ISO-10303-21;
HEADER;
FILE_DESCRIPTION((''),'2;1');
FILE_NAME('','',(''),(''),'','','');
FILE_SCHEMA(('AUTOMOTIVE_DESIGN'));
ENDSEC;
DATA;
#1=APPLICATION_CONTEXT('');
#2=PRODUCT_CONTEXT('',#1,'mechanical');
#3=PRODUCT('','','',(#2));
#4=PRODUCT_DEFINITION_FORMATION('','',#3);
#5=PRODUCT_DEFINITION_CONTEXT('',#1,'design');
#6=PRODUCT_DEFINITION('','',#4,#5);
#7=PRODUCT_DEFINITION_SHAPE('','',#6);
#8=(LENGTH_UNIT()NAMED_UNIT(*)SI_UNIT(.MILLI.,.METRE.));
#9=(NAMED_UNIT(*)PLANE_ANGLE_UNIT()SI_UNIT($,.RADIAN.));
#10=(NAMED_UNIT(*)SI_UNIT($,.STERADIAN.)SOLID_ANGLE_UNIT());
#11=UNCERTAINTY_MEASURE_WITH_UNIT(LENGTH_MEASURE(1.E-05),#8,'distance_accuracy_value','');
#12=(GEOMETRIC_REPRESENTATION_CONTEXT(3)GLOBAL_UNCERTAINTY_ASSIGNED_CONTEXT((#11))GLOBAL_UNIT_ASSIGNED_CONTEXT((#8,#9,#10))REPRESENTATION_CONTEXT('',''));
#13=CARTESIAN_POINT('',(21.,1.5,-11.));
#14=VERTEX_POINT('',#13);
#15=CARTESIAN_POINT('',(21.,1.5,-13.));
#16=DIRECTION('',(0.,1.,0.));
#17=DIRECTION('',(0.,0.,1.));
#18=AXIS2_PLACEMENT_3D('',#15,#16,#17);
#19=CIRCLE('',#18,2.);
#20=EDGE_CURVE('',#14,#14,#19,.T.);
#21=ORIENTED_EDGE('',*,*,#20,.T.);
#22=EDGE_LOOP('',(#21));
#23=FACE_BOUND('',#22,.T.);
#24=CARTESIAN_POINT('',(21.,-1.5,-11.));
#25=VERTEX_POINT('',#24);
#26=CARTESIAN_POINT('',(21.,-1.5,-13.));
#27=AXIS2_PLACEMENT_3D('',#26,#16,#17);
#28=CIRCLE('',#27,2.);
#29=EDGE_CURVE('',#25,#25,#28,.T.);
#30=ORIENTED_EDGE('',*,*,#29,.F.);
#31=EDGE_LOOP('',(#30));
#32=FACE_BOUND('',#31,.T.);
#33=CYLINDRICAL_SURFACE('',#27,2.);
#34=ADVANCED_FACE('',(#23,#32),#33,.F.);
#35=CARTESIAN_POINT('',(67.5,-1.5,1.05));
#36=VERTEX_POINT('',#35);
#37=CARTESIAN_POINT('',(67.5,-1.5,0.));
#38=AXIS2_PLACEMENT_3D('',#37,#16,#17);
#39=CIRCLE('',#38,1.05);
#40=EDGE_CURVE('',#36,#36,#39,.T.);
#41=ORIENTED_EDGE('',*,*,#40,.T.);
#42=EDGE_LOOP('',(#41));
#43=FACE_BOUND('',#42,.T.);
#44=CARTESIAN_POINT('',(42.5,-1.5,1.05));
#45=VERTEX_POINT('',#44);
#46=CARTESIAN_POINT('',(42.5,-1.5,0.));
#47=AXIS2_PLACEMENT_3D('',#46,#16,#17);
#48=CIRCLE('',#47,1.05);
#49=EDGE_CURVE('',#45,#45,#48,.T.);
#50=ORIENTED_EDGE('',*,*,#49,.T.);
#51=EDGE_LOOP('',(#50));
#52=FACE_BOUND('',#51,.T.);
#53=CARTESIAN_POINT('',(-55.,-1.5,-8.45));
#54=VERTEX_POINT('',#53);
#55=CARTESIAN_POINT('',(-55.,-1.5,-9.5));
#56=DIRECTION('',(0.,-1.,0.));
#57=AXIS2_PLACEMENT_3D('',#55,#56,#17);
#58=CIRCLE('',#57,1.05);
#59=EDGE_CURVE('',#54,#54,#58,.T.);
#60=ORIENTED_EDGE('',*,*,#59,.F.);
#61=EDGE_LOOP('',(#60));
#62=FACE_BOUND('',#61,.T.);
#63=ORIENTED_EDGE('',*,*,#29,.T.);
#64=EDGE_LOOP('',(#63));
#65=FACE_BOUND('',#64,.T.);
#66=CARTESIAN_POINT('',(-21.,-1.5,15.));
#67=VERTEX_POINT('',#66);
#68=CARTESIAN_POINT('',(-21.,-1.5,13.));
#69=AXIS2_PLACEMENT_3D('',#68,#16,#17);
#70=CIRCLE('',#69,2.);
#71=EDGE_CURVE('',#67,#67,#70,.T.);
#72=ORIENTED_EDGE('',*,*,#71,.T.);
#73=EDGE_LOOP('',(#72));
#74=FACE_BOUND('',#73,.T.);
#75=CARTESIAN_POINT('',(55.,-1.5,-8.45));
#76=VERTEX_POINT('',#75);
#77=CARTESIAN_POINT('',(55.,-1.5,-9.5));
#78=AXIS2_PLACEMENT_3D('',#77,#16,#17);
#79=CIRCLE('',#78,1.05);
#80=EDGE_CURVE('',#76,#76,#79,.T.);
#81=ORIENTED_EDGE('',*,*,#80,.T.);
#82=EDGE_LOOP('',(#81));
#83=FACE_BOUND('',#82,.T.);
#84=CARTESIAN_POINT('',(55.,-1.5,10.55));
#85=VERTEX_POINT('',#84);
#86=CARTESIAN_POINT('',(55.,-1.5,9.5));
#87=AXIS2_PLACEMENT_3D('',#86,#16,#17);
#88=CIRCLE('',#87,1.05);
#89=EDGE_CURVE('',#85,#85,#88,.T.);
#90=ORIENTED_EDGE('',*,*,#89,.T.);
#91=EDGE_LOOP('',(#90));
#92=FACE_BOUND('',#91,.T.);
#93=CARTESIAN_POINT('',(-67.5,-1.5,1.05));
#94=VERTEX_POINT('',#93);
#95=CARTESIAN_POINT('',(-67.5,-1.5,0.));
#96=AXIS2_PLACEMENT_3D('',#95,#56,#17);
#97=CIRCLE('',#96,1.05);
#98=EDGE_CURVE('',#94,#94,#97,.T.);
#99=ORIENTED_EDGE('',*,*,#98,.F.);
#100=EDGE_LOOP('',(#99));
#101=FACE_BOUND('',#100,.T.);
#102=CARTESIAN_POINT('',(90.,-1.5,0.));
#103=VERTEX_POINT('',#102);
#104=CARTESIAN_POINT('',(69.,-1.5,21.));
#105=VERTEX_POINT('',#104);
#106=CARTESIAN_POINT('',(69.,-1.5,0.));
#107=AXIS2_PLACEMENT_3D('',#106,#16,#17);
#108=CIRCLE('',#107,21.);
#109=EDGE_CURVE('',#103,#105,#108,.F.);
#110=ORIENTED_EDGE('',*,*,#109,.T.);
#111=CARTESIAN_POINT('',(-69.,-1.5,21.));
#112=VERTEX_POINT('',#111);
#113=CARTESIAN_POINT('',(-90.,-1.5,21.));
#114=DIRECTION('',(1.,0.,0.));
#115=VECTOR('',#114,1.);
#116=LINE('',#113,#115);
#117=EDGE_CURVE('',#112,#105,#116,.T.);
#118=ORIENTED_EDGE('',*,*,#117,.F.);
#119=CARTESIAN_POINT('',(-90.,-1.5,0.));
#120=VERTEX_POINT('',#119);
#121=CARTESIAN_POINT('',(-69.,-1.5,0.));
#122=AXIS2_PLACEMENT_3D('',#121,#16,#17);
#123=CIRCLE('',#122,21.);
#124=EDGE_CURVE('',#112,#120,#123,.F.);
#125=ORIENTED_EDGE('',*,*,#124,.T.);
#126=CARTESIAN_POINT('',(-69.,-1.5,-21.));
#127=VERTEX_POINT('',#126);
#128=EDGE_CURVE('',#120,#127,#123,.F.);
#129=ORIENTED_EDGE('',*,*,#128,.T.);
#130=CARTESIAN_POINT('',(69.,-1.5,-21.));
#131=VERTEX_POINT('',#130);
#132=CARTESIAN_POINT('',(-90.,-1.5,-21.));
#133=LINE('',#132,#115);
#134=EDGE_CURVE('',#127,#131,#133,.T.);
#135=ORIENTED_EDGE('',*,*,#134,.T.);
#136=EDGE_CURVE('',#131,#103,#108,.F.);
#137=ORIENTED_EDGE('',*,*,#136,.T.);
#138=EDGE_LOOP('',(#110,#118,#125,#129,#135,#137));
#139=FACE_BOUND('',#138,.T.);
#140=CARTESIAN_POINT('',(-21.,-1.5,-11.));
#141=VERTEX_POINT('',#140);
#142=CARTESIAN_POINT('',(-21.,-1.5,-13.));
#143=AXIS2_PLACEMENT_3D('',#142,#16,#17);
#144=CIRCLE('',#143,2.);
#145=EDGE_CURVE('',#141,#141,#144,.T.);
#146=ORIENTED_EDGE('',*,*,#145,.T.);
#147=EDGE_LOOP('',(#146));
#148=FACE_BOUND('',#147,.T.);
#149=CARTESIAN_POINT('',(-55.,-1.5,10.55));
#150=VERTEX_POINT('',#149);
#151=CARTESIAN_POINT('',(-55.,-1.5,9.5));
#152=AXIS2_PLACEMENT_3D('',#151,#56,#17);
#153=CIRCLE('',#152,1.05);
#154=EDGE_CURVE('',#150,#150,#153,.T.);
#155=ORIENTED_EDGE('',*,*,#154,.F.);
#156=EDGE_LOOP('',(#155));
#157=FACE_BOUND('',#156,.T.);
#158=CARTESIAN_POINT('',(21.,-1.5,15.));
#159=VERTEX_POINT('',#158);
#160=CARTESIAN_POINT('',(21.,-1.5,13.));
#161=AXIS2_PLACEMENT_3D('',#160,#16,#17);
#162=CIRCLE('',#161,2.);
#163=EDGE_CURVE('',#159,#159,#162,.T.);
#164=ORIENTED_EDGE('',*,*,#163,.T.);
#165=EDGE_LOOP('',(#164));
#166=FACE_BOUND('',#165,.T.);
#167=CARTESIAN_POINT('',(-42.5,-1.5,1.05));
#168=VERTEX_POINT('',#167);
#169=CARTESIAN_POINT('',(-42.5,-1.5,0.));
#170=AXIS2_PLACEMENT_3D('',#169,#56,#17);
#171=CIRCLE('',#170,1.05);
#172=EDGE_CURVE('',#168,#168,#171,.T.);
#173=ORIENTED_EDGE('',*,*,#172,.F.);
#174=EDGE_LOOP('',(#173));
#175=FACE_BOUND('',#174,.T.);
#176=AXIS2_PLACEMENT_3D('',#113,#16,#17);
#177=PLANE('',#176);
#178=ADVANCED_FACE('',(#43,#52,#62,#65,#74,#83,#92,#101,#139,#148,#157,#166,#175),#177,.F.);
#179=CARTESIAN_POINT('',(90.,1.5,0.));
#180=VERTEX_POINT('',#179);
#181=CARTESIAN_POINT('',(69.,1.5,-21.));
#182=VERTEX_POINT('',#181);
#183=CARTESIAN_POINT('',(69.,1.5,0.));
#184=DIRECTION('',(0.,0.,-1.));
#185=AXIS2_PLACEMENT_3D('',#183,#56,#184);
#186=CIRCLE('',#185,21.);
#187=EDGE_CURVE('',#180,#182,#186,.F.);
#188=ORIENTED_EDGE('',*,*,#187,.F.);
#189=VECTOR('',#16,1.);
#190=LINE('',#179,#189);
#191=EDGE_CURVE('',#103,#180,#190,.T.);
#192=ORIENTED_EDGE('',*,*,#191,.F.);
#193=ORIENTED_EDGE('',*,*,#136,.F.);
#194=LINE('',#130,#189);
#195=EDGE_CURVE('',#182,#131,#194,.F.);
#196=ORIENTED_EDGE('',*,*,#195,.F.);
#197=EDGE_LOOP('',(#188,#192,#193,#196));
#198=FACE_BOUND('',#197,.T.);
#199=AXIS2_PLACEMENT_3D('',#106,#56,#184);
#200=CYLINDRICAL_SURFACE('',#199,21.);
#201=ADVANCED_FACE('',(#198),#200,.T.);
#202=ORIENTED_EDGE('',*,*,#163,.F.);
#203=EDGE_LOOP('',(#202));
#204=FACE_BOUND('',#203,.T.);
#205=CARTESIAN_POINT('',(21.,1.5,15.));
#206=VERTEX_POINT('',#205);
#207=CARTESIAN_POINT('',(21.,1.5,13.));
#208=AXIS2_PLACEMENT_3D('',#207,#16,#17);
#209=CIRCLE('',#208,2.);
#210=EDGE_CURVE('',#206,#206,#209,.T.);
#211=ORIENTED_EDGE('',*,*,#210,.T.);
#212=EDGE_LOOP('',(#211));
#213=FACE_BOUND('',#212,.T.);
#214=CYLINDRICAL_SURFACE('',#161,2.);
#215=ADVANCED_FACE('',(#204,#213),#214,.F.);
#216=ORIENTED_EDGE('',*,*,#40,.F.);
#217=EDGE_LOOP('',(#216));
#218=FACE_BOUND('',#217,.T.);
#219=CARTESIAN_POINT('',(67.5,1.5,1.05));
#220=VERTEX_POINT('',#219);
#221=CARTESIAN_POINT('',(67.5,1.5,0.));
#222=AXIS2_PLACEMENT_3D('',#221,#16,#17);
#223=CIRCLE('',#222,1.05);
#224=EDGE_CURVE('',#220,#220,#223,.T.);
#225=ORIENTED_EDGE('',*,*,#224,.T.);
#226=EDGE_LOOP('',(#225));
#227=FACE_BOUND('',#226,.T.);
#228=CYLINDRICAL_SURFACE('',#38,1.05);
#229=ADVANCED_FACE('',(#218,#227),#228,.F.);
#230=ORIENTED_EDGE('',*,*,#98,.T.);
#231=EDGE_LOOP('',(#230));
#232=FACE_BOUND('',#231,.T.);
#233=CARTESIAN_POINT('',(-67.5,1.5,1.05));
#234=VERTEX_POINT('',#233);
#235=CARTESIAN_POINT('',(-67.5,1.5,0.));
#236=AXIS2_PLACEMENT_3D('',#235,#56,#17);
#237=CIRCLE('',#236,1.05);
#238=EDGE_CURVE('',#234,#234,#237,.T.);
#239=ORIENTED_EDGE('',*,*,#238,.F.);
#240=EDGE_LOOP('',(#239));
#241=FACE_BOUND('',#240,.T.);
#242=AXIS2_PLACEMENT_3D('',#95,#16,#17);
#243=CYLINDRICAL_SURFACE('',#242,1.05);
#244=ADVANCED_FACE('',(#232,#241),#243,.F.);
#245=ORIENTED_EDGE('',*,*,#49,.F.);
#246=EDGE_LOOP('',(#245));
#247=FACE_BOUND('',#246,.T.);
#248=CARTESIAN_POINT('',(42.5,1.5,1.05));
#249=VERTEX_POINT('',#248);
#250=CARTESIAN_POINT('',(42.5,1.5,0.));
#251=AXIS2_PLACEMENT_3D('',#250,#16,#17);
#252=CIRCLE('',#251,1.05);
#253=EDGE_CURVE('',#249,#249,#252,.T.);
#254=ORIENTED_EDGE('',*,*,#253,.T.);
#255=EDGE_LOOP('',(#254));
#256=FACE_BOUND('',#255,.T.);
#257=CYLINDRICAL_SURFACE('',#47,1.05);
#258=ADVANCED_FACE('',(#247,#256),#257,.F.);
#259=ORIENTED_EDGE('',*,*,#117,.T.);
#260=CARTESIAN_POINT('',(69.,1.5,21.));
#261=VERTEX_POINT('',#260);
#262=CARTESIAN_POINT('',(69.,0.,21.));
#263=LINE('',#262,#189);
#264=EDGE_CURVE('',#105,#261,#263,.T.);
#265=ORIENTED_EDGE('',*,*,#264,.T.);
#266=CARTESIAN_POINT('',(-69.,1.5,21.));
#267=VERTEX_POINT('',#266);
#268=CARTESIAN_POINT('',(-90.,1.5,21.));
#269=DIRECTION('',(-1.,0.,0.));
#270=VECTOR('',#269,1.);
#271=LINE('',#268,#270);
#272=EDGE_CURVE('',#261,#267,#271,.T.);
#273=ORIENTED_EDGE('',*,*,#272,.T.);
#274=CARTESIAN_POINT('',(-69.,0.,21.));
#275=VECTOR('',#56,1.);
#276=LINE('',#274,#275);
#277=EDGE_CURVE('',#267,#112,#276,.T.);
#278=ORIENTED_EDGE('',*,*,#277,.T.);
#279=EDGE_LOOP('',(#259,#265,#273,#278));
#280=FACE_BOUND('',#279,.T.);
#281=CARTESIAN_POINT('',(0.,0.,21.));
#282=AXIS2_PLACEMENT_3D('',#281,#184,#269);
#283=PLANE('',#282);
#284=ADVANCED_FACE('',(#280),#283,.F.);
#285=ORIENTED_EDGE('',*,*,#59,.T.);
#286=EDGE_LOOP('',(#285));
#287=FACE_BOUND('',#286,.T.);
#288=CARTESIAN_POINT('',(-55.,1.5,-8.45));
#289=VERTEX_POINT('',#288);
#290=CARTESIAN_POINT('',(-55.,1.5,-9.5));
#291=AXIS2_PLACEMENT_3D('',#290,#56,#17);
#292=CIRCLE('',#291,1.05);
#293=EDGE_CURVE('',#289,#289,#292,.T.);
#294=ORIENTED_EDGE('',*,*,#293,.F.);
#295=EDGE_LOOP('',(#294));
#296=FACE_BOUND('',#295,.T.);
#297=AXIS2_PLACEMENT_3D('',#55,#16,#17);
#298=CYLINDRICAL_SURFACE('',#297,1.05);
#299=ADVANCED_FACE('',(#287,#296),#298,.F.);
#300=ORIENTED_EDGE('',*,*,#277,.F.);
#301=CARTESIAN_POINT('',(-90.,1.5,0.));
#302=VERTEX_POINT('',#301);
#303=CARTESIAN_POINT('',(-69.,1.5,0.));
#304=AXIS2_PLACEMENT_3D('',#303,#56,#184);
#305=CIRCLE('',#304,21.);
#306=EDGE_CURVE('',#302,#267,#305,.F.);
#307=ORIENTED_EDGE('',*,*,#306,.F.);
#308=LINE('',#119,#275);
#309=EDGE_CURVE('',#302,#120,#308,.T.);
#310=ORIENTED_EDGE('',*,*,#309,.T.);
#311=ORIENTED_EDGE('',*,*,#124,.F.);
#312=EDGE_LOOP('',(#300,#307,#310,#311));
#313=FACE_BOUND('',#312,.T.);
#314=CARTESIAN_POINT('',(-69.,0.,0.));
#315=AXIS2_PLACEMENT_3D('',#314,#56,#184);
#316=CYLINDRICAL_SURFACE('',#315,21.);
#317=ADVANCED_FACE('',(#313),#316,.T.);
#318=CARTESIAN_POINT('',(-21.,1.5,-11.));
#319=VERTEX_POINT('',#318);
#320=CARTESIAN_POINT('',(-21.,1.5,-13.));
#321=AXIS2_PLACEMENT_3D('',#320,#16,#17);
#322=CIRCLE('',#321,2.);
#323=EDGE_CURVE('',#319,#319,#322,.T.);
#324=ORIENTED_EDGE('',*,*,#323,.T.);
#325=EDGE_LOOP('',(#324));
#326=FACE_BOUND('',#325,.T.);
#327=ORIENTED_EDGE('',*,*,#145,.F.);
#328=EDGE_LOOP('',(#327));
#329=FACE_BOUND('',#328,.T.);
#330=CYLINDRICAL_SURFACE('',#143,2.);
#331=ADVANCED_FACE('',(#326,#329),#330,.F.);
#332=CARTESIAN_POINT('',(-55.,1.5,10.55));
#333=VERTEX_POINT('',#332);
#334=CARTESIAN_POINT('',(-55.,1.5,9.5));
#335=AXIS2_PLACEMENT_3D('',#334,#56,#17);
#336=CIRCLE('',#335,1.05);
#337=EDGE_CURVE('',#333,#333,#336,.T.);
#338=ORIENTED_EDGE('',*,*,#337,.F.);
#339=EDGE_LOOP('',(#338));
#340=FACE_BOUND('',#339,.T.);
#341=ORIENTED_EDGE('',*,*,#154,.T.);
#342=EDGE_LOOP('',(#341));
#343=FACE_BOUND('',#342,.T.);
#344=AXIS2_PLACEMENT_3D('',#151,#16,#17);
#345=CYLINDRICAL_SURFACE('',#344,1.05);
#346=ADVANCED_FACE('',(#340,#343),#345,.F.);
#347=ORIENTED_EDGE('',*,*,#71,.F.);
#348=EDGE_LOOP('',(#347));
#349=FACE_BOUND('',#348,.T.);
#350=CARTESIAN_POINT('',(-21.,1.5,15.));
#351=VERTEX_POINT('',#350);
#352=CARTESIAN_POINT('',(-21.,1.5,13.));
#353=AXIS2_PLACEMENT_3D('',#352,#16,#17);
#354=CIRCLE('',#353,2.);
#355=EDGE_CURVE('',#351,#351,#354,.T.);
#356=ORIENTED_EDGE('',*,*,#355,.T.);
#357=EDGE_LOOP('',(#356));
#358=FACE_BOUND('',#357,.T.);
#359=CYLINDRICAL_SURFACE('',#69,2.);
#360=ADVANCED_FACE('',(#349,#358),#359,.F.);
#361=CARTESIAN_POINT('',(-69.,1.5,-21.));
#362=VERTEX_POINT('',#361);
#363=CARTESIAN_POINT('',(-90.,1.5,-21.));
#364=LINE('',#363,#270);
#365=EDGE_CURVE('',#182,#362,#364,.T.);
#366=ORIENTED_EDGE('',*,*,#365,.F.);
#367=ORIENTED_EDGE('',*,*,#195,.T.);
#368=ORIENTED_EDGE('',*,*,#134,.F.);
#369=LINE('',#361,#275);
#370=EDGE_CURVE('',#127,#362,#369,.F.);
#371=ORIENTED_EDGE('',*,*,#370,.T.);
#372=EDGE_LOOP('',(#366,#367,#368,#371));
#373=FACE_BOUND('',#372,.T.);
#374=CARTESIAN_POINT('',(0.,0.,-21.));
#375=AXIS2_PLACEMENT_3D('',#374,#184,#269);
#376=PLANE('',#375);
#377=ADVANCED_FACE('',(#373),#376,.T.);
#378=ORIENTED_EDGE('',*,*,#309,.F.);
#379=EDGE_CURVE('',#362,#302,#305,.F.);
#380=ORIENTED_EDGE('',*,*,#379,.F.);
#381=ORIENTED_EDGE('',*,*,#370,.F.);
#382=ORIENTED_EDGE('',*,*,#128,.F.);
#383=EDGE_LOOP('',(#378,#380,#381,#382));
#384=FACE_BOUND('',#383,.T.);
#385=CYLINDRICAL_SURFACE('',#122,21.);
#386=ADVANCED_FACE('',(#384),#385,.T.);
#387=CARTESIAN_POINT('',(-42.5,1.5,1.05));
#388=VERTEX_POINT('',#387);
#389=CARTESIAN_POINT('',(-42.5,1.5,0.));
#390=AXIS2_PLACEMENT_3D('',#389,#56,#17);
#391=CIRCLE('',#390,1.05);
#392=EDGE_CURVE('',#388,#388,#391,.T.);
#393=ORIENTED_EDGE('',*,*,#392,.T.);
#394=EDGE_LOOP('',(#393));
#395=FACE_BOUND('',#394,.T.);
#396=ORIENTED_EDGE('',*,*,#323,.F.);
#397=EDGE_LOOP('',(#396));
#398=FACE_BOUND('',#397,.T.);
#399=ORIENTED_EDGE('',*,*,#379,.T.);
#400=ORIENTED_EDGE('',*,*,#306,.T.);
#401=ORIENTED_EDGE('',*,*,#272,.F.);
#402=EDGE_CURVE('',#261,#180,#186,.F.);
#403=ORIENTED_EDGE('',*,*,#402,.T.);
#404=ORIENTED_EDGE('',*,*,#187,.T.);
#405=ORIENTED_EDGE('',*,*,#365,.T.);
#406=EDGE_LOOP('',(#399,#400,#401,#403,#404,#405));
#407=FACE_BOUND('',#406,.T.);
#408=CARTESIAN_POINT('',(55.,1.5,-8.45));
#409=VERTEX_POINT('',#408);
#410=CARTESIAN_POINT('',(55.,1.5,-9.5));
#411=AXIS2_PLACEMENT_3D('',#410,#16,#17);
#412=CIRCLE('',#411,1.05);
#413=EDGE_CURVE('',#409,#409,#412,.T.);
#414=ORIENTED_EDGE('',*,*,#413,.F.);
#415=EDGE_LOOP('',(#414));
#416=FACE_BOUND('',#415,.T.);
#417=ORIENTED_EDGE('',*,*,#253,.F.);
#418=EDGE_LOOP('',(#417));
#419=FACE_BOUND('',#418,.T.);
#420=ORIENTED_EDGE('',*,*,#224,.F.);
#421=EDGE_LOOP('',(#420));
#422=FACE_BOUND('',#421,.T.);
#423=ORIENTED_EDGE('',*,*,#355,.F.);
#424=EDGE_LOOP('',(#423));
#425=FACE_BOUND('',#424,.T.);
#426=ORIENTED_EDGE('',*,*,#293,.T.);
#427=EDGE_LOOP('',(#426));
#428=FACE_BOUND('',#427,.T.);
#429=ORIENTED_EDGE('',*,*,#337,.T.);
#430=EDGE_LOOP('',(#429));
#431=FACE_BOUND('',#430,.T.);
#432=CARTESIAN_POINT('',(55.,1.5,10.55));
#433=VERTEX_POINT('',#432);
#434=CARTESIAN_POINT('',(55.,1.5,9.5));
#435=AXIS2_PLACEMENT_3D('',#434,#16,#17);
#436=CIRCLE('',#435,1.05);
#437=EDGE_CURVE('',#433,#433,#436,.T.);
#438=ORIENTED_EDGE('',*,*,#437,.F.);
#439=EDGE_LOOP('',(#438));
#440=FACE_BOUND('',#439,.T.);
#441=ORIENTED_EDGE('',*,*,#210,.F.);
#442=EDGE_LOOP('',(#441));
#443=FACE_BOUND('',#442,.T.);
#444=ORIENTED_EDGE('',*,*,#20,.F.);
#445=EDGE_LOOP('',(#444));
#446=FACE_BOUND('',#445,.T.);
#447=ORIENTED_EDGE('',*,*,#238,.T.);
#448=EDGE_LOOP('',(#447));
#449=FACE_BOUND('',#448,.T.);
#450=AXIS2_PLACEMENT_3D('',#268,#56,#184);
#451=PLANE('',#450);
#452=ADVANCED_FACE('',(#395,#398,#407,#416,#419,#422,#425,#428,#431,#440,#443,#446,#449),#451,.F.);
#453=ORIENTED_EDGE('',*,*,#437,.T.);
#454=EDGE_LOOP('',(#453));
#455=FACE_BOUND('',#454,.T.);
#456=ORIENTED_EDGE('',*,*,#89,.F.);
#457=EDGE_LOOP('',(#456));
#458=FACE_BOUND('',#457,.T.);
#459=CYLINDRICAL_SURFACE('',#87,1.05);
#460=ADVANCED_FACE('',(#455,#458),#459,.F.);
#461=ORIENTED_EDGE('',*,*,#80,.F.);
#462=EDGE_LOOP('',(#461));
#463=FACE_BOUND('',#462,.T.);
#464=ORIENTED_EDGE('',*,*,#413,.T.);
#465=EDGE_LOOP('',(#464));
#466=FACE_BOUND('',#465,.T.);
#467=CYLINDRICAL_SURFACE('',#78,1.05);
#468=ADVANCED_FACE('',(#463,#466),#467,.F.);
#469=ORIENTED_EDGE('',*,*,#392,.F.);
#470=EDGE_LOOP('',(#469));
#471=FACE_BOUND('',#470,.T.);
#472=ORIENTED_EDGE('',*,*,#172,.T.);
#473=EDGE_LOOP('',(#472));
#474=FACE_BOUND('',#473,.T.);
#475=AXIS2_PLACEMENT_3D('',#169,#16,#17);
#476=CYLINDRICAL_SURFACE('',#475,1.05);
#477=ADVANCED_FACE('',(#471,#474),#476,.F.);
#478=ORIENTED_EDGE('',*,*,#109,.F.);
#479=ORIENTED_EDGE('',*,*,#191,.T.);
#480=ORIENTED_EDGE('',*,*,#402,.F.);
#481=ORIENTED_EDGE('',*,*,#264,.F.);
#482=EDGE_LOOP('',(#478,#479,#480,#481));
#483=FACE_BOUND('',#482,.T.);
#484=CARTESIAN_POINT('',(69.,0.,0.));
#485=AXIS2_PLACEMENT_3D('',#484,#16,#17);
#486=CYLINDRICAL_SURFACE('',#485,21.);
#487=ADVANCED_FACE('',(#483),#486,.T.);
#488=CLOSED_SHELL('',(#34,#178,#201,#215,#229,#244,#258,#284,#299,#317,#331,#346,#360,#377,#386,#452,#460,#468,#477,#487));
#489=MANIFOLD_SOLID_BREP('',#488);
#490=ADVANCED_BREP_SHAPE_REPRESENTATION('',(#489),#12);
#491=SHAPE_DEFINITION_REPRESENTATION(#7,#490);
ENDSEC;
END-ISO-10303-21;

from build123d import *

# Parameters (mm, degrees)
SKETCH_1_W          = 180
SKETCH_1_H          = 3
EXTRUDE_1_DEPTH     = 21
SKETCH_2_R          = 2
CUT_EXTRUDE_1_DEPTH = 93.466210045
SKETCH_3_R          = 1.05
CUT_EXTRUDE_2_DEPTH = 93.466210045
FILLET_1_R          = 21


with BuildPart() as part:
    # 草图1 → 凸台-拉伸1 (new, symmetric)
    with BuildSketch(Plane.XY):
        Rectangle(SKETCH_1_W, SKETCH_1_H)
    extrude(amount=EXTRUDE_1_DEPTH, both=True)

    # 草图2 → 切除-拉伸1 (cut, through all)
    with BuildSketch(Plane(origin=(0, 1.5, 0), x_dir=(1, 0, 0), z_dir=(0, 1, 0))):
        with Locations(Location((-21, 13, 0), (0, 0, 270))):
            Circle(SKETCH_2_R)
        with Locations(Location((21, 13, 0), (0, 0, 270))):
            Circle(SKETCH_2_R)
        with Locations(Location((21, -13, 0), (0, 0, 270))):
            Circle(SKETCH_2_R)
        with Locations(Location((-21, -13, 0), (0, 0, 270))):
            Circle(SKETCH_2_R)
    extrude(amount=-CUT_EXTRUDE_1_DEPTH, mode=Mode.SUBTRACT)

    # 草图3 → 切除-拉伸2 (cut, through all)
    with BuildSketch(Plane(origin=(0, 1.5, 0), x_dir=(1, 0, 0), z_dir=(0, 1, 0))):
        with Locations(Location((55, 9.5, 0), (0, 0, 270))):
            Circle(SKETCH_3_R)
        with Locations(Location((55, -9.5, 0), (0, 0, 270))):
            Circle(SKETCH_3_R)
        with Locations(Location((42.5, 0, 0), (0, 0, 270))):
            Circle(SKETCH_3_R)
        with Locations(Location((67.5, 0, 0), (0, 0, 270))):
            Circle(SKETCH_3_R)
    cut_extrude_2 = extrude(amount=-CUT_EXTRUDE_2_DEPTH, mode=Mode.SUBTRACT)

    # 镜向1: 切除-拉伸2 across plane
    add(cut_extrude_2.mirror(Plane(origin=(0, 0, 0), x_dir=(0, 0, 1), z_dir=(1, 0, 0))), mode=Mode.SUBTRACT)

    # 圆角1
    fillet_1_edges = [part.edges().sort_by_distance(p)[0] for p in [
        (90, 0, 21),
        (-90, 0, 21),
        (-90, 0, -21),
        (90, 0, -21),
    ]]
    fillet(fillet_1_edges, radius=FILLET_1_R - 0.0001)  # a hair under: the kernel refuses the full size


solid = part.part
